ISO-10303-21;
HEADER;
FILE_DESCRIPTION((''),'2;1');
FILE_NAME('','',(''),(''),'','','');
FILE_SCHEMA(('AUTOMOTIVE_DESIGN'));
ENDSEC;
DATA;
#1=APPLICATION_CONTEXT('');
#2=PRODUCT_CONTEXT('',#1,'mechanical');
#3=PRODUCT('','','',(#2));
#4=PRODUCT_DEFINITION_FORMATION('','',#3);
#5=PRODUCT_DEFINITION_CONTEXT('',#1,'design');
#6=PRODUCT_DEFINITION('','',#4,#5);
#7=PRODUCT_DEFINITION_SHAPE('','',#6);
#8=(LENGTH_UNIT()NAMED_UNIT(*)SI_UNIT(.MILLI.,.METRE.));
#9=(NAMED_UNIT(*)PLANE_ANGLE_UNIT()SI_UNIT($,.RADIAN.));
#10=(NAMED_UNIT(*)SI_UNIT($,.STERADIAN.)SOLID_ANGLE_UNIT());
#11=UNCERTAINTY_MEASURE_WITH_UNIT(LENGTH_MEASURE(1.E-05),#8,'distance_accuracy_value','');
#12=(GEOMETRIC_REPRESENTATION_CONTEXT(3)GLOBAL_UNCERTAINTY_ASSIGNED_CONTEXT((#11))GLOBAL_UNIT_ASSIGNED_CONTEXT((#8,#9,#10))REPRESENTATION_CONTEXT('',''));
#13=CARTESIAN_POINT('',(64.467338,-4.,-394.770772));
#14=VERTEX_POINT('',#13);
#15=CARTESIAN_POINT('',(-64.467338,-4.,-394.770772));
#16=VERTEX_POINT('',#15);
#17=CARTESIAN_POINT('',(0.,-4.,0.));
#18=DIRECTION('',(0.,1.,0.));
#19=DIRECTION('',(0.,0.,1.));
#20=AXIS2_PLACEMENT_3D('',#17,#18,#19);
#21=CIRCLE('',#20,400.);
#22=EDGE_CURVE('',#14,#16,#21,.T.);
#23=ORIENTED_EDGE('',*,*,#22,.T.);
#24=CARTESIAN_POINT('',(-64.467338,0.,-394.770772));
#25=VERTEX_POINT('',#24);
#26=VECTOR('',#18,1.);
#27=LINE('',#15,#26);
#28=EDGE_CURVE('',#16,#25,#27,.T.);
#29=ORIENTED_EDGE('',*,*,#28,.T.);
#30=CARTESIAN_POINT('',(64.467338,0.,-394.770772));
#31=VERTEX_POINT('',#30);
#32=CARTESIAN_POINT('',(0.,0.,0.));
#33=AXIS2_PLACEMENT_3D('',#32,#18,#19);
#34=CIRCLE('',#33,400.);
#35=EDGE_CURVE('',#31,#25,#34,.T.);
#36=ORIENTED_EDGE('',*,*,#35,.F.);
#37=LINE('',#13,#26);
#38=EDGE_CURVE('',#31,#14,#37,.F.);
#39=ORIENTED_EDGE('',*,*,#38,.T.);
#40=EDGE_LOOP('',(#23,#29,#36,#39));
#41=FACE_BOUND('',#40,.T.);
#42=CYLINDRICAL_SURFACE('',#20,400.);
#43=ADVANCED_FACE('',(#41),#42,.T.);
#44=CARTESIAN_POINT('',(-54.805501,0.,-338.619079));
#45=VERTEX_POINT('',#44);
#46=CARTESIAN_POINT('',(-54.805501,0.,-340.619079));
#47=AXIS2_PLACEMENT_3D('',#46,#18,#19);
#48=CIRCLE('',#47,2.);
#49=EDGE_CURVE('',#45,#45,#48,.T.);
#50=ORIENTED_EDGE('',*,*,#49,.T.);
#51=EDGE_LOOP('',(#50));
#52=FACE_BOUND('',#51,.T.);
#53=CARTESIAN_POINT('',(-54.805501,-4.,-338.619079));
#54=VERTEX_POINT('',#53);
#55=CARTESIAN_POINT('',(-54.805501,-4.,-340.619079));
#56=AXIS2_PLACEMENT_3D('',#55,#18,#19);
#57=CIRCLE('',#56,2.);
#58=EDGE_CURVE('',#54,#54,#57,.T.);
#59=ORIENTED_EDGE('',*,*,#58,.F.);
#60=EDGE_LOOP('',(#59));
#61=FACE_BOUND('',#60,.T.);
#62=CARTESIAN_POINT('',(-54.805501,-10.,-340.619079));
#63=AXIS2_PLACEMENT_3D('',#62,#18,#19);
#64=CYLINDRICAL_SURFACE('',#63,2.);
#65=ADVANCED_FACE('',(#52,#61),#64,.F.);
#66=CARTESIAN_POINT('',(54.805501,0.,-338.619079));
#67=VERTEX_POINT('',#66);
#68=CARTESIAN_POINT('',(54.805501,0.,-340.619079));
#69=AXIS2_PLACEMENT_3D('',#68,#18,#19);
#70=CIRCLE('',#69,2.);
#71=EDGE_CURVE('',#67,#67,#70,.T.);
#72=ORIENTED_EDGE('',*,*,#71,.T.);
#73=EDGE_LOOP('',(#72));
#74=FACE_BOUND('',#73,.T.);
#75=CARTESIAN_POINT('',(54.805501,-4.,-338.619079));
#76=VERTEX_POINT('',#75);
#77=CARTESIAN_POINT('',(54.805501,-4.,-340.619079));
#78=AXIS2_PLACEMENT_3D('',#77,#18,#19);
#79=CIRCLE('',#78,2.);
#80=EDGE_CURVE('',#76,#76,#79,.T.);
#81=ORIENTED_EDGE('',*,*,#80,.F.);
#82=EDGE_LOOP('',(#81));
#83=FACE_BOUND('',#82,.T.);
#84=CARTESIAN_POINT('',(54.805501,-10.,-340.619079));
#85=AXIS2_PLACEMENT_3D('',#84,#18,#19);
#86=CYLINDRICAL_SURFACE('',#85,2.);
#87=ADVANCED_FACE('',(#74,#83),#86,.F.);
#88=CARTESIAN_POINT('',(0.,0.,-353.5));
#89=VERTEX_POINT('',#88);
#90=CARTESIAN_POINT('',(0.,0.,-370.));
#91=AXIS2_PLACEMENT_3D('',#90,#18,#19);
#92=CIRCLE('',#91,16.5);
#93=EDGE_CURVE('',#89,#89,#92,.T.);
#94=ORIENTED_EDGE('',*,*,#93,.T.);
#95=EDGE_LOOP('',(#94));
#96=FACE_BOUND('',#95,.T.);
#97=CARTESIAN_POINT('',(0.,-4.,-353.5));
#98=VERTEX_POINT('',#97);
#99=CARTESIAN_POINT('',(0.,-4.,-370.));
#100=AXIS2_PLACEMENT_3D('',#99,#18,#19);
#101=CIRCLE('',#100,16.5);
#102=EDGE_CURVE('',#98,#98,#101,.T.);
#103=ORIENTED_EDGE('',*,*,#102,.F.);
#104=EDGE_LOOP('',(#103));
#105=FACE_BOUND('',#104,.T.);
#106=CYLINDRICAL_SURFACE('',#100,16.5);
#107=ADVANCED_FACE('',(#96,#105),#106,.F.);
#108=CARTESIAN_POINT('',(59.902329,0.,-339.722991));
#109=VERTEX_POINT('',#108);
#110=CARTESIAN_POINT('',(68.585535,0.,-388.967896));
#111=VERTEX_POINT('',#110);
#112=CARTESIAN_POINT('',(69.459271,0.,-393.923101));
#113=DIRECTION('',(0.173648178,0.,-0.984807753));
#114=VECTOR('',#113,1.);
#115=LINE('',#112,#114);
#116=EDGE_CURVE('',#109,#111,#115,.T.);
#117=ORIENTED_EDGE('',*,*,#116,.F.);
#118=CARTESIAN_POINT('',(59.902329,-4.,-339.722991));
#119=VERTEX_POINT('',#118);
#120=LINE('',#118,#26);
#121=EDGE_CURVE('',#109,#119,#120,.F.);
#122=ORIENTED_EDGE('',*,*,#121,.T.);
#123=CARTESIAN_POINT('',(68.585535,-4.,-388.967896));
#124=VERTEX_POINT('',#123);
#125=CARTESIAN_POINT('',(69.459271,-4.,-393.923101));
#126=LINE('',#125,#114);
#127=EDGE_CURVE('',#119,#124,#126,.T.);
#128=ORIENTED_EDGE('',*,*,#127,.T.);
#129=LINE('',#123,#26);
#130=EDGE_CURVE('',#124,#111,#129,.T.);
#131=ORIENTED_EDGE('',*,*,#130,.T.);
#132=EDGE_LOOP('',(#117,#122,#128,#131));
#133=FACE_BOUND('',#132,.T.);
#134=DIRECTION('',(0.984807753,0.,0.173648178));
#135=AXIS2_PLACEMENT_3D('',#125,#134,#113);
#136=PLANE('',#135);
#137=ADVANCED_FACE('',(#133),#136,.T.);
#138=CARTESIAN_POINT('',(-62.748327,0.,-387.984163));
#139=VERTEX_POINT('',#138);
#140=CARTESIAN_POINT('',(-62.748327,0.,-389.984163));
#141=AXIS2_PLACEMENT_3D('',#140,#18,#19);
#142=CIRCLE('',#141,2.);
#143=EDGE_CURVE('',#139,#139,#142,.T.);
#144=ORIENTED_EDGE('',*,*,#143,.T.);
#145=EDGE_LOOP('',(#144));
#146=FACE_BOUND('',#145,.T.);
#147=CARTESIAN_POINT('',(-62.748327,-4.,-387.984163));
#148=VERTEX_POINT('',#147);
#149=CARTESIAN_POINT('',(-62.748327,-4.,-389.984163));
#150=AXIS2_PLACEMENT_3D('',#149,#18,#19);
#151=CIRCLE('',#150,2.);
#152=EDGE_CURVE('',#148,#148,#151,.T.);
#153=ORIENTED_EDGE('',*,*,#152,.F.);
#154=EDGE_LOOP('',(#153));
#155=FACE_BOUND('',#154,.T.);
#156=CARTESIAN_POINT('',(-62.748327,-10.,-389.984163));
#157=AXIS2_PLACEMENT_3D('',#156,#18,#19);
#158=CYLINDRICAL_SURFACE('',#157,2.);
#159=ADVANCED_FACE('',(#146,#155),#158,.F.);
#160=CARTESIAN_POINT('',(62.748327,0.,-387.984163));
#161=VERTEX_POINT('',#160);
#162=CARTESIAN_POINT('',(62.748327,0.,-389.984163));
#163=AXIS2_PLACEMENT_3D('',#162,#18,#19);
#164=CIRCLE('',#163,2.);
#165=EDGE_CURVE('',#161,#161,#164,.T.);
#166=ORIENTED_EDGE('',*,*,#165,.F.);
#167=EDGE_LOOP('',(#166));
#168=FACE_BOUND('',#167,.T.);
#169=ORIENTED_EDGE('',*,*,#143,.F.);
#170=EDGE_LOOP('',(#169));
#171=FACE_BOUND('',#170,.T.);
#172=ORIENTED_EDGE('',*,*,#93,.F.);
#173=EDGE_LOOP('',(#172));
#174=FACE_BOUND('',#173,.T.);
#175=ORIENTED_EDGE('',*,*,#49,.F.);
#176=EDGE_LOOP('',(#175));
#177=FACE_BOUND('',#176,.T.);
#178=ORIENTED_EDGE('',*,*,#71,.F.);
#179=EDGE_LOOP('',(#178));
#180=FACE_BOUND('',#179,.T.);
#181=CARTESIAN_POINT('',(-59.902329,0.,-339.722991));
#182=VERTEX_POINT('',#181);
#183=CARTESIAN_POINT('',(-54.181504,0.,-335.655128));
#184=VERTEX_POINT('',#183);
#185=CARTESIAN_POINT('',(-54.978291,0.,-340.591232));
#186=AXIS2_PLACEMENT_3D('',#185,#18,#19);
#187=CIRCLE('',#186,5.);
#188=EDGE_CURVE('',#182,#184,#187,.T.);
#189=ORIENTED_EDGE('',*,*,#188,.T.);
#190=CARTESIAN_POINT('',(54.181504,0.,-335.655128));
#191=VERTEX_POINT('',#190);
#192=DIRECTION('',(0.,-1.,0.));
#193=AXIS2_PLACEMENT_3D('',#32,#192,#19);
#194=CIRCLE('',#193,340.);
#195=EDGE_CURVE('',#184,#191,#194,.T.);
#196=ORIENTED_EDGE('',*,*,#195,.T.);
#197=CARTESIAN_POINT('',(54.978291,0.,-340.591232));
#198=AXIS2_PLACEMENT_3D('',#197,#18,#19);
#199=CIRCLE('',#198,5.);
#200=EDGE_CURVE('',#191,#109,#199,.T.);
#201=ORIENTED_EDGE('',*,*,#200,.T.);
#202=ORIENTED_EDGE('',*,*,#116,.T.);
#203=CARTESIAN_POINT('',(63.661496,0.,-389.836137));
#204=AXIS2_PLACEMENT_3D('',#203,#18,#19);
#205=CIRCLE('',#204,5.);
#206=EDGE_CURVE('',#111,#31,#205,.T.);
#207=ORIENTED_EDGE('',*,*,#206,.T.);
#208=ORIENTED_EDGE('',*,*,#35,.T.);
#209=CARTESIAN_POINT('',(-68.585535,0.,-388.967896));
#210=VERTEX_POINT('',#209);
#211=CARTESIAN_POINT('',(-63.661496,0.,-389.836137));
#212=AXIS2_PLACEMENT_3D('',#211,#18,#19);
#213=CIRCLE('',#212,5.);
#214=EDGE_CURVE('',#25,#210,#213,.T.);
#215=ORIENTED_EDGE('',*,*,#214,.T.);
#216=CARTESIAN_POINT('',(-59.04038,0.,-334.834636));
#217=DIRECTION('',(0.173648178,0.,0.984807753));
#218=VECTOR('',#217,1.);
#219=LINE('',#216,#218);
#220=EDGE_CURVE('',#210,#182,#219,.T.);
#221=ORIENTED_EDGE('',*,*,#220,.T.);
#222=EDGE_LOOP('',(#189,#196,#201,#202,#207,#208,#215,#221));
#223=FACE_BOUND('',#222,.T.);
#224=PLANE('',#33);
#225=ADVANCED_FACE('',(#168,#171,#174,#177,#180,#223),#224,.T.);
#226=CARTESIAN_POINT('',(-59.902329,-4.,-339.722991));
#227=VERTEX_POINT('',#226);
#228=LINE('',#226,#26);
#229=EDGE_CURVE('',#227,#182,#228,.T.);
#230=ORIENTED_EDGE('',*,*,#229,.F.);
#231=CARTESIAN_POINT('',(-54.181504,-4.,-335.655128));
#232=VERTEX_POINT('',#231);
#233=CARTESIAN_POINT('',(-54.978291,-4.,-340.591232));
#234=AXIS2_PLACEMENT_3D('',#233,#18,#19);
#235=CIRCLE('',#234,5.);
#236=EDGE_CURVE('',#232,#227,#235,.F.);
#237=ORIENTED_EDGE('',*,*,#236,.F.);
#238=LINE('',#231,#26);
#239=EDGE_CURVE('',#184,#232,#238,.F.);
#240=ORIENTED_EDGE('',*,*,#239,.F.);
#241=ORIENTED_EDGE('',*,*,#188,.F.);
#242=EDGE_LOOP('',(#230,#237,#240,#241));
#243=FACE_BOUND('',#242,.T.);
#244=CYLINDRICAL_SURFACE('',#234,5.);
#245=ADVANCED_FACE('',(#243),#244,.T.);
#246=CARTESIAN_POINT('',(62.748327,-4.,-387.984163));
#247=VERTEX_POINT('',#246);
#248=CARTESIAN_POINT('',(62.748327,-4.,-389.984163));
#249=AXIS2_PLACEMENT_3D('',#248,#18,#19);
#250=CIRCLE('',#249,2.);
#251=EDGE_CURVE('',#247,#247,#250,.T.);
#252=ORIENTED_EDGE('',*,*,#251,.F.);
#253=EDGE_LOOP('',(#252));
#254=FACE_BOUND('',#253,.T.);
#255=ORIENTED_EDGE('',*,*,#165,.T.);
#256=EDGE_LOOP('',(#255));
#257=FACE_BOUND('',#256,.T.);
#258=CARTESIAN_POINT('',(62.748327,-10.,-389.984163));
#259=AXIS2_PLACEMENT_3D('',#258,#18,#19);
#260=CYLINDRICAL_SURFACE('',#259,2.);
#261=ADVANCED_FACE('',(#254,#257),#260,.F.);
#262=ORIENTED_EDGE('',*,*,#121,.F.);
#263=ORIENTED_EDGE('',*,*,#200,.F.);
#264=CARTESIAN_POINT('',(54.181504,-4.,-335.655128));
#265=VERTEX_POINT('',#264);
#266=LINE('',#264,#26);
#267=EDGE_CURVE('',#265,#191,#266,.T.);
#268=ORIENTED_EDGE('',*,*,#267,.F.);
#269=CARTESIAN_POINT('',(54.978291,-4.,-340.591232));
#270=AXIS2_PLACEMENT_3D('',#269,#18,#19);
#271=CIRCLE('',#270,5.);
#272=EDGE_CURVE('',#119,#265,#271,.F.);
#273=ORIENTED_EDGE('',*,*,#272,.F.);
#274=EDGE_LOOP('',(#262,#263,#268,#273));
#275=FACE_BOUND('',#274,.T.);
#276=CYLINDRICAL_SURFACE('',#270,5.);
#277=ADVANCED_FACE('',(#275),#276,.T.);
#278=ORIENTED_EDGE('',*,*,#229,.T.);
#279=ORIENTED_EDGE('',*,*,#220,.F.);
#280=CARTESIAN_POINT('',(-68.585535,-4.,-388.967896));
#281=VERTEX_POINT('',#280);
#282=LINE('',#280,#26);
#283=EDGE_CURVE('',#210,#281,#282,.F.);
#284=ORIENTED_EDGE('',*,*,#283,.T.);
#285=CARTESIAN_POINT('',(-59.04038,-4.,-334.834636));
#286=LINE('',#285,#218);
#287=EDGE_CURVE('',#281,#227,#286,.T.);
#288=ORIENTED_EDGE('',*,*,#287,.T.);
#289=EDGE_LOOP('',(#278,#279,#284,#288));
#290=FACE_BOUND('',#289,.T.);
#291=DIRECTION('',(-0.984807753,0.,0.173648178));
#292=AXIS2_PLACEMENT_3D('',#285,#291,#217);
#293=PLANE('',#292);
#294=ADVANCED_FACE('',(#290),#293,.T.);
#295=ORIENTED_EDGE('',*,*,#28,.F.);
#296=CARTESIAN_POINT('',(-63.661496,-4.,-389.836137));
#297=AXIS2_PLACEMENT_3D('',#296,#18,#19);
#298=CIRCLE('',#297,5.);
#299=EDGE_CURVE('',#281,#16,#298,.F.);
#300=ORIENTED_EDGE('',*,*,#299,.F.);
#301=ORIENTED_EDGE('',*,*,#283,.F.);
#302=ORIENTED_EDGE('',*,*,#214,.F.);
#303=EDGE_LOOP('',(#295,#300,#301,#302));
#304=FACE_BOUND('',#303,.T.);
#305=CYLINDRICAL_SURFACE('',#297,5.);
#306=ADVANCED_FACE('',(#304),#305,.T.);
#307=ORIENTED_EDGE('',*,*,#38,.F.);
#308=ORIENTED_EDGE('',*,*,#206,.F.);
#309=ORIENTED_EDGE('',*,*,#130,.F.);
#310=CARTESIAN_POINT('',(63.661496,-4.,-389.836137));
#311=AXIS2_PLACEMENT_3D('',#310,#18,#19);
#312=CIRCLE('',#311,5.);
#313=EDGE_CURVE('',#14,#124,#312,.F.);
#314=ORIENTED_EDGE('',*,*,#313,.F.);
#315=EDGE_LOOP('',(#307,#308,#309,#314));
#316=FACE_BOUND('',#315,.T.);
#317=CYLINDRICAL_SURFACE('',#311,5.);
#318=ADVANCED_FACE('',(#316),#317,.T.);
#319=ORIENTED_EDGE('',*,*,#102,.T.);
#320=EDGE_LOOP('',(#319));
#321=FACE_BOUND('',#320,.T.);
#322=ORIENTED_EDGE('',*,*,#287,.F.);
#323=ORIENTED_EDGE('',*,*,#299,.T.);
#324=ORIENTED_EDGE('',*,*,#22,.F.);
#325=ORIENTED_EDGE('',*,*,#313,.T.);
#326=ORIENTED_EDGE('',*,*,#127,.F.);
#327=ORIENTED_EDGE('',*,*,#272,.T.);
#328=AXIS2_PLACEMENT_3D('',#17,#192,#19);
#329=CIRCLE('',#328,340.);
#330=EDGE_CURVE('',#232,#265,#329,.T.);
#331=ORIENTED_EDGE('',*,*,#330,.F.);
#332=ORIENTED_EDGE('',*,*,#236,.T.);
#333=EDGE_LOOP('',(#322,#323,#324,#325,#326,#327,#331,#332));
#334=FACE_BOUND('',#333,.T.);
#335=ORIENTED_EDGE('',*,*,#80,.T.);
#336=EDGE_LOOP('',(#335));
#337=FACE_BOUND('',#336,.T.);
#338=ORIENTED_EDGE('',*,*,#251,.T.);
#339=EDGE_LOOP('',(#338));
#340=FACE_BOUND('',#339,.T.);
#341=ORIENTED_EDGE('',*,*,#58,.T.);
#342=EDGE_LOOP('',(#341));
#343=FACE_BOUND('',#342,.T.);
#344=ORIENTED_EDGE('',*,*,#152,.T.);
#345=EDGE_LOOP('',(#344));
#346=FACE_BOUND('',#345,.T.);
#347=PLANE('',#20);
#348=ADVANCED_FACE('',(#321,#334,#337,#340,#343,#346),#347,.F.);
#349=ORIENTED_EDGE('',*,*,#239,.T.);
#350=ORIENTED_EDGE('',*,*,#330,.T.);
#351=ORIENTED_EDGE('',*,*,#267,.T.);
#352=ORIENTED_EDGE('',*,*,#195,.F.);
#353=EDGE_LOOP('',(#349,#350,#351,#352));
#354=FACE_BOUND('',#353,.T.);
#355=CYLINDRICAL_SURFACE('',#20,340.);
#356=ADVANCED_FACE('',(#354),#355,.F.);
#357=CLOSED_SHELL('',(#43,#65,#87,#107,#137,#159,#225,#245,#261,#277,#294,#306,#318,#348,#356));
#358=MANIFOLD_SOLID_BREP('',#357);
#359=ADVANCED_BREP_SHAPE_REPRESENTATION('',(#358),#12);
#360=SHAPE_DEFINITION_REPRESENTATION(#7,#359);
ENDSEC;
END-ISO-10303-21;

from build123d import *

# Parameters (mm, degrees)
SKETCH_1_R             = 16.5
SM_BASE_FLANGE_1_DEPTH = 4
SKETCH_4_R             = 2
CUT_EXTRUDE_1_DEPTH    = 10
FILLET_3_R             = 5


# Sheet-metal steps are written as plain solids
with BuildPart() as part:
    # Sketch 1 → Базовая кромка1 (new body)
    with BuildSketch(Plane(origin=(0, 0, 0), x_dir=(1, 0, 0), z_dir=(0, 1, 0))):
        with BuildLine():
            Line((-59.040380407, 334.834636024), (-69.459271067, 393.923101205))
            ThreePointArc((-69.459271067, 393.923101205), (0, 400), (69.459271067, 393.923101205))
            Line((69.459271067, 393.923101205), (59.040380407, 334.834636024))
            ThreePointArc((59.040380407, 334.834636024), (0, 340), (-59.040380407, 334.834636024))
        make_face()
        with Locations(Location((0, 370, 0), (0, 0, 270))):
            Circle(SKETCH_1_R, mode=Mode.SUBTRACT)
    extrude(amount=-SM_BASE_FLANGE_1_DEPTH)

    # Эскиз4 → Вырез-Вытянуть1 (cut)
    with BuildSketch(Plane(origin=(0, 0, 0), x_dir=(1, 0, 0), z_dir=(0, 1, 0))):
        with Locations(Location((62.748327317, 389.984163036, 0), (0, 0, 270))):
            Circle(SKETCH_4_R)
        with Locations(Location((54.805501074, 340.619079107, 0), (0, 0, 270))):
            Circle(SKETCH_4_R)
        with Locations(Location((-54.805501074, 340.619079107, 0), (0, 0, 270))):
            Circle(SKETCH_4_R)
        with Locations(Location((-62.748327317, 389.984163036, 0), (0, 0, 270))):
            Circle(SKETCH_4_R)
    extrude(amount=-CUT_EXTRUDE_1_DEPTH, mode=Mode.SUBTRACT)

    # Скругление3
    fillet_3_edges = [part.edges().sort_by_distance(p)[0] for p in [
        (-59.040380407, -2, -334.834636024),
        (-69.459271067, -2, -393.923101205),
        (69.459271067, -2, -393.923101205),
        (59.040380407, -2, -334.834636024),
    ]]
    fillet(fillet_3_edges, radius=FILLET_3_R)


solid = part.part
